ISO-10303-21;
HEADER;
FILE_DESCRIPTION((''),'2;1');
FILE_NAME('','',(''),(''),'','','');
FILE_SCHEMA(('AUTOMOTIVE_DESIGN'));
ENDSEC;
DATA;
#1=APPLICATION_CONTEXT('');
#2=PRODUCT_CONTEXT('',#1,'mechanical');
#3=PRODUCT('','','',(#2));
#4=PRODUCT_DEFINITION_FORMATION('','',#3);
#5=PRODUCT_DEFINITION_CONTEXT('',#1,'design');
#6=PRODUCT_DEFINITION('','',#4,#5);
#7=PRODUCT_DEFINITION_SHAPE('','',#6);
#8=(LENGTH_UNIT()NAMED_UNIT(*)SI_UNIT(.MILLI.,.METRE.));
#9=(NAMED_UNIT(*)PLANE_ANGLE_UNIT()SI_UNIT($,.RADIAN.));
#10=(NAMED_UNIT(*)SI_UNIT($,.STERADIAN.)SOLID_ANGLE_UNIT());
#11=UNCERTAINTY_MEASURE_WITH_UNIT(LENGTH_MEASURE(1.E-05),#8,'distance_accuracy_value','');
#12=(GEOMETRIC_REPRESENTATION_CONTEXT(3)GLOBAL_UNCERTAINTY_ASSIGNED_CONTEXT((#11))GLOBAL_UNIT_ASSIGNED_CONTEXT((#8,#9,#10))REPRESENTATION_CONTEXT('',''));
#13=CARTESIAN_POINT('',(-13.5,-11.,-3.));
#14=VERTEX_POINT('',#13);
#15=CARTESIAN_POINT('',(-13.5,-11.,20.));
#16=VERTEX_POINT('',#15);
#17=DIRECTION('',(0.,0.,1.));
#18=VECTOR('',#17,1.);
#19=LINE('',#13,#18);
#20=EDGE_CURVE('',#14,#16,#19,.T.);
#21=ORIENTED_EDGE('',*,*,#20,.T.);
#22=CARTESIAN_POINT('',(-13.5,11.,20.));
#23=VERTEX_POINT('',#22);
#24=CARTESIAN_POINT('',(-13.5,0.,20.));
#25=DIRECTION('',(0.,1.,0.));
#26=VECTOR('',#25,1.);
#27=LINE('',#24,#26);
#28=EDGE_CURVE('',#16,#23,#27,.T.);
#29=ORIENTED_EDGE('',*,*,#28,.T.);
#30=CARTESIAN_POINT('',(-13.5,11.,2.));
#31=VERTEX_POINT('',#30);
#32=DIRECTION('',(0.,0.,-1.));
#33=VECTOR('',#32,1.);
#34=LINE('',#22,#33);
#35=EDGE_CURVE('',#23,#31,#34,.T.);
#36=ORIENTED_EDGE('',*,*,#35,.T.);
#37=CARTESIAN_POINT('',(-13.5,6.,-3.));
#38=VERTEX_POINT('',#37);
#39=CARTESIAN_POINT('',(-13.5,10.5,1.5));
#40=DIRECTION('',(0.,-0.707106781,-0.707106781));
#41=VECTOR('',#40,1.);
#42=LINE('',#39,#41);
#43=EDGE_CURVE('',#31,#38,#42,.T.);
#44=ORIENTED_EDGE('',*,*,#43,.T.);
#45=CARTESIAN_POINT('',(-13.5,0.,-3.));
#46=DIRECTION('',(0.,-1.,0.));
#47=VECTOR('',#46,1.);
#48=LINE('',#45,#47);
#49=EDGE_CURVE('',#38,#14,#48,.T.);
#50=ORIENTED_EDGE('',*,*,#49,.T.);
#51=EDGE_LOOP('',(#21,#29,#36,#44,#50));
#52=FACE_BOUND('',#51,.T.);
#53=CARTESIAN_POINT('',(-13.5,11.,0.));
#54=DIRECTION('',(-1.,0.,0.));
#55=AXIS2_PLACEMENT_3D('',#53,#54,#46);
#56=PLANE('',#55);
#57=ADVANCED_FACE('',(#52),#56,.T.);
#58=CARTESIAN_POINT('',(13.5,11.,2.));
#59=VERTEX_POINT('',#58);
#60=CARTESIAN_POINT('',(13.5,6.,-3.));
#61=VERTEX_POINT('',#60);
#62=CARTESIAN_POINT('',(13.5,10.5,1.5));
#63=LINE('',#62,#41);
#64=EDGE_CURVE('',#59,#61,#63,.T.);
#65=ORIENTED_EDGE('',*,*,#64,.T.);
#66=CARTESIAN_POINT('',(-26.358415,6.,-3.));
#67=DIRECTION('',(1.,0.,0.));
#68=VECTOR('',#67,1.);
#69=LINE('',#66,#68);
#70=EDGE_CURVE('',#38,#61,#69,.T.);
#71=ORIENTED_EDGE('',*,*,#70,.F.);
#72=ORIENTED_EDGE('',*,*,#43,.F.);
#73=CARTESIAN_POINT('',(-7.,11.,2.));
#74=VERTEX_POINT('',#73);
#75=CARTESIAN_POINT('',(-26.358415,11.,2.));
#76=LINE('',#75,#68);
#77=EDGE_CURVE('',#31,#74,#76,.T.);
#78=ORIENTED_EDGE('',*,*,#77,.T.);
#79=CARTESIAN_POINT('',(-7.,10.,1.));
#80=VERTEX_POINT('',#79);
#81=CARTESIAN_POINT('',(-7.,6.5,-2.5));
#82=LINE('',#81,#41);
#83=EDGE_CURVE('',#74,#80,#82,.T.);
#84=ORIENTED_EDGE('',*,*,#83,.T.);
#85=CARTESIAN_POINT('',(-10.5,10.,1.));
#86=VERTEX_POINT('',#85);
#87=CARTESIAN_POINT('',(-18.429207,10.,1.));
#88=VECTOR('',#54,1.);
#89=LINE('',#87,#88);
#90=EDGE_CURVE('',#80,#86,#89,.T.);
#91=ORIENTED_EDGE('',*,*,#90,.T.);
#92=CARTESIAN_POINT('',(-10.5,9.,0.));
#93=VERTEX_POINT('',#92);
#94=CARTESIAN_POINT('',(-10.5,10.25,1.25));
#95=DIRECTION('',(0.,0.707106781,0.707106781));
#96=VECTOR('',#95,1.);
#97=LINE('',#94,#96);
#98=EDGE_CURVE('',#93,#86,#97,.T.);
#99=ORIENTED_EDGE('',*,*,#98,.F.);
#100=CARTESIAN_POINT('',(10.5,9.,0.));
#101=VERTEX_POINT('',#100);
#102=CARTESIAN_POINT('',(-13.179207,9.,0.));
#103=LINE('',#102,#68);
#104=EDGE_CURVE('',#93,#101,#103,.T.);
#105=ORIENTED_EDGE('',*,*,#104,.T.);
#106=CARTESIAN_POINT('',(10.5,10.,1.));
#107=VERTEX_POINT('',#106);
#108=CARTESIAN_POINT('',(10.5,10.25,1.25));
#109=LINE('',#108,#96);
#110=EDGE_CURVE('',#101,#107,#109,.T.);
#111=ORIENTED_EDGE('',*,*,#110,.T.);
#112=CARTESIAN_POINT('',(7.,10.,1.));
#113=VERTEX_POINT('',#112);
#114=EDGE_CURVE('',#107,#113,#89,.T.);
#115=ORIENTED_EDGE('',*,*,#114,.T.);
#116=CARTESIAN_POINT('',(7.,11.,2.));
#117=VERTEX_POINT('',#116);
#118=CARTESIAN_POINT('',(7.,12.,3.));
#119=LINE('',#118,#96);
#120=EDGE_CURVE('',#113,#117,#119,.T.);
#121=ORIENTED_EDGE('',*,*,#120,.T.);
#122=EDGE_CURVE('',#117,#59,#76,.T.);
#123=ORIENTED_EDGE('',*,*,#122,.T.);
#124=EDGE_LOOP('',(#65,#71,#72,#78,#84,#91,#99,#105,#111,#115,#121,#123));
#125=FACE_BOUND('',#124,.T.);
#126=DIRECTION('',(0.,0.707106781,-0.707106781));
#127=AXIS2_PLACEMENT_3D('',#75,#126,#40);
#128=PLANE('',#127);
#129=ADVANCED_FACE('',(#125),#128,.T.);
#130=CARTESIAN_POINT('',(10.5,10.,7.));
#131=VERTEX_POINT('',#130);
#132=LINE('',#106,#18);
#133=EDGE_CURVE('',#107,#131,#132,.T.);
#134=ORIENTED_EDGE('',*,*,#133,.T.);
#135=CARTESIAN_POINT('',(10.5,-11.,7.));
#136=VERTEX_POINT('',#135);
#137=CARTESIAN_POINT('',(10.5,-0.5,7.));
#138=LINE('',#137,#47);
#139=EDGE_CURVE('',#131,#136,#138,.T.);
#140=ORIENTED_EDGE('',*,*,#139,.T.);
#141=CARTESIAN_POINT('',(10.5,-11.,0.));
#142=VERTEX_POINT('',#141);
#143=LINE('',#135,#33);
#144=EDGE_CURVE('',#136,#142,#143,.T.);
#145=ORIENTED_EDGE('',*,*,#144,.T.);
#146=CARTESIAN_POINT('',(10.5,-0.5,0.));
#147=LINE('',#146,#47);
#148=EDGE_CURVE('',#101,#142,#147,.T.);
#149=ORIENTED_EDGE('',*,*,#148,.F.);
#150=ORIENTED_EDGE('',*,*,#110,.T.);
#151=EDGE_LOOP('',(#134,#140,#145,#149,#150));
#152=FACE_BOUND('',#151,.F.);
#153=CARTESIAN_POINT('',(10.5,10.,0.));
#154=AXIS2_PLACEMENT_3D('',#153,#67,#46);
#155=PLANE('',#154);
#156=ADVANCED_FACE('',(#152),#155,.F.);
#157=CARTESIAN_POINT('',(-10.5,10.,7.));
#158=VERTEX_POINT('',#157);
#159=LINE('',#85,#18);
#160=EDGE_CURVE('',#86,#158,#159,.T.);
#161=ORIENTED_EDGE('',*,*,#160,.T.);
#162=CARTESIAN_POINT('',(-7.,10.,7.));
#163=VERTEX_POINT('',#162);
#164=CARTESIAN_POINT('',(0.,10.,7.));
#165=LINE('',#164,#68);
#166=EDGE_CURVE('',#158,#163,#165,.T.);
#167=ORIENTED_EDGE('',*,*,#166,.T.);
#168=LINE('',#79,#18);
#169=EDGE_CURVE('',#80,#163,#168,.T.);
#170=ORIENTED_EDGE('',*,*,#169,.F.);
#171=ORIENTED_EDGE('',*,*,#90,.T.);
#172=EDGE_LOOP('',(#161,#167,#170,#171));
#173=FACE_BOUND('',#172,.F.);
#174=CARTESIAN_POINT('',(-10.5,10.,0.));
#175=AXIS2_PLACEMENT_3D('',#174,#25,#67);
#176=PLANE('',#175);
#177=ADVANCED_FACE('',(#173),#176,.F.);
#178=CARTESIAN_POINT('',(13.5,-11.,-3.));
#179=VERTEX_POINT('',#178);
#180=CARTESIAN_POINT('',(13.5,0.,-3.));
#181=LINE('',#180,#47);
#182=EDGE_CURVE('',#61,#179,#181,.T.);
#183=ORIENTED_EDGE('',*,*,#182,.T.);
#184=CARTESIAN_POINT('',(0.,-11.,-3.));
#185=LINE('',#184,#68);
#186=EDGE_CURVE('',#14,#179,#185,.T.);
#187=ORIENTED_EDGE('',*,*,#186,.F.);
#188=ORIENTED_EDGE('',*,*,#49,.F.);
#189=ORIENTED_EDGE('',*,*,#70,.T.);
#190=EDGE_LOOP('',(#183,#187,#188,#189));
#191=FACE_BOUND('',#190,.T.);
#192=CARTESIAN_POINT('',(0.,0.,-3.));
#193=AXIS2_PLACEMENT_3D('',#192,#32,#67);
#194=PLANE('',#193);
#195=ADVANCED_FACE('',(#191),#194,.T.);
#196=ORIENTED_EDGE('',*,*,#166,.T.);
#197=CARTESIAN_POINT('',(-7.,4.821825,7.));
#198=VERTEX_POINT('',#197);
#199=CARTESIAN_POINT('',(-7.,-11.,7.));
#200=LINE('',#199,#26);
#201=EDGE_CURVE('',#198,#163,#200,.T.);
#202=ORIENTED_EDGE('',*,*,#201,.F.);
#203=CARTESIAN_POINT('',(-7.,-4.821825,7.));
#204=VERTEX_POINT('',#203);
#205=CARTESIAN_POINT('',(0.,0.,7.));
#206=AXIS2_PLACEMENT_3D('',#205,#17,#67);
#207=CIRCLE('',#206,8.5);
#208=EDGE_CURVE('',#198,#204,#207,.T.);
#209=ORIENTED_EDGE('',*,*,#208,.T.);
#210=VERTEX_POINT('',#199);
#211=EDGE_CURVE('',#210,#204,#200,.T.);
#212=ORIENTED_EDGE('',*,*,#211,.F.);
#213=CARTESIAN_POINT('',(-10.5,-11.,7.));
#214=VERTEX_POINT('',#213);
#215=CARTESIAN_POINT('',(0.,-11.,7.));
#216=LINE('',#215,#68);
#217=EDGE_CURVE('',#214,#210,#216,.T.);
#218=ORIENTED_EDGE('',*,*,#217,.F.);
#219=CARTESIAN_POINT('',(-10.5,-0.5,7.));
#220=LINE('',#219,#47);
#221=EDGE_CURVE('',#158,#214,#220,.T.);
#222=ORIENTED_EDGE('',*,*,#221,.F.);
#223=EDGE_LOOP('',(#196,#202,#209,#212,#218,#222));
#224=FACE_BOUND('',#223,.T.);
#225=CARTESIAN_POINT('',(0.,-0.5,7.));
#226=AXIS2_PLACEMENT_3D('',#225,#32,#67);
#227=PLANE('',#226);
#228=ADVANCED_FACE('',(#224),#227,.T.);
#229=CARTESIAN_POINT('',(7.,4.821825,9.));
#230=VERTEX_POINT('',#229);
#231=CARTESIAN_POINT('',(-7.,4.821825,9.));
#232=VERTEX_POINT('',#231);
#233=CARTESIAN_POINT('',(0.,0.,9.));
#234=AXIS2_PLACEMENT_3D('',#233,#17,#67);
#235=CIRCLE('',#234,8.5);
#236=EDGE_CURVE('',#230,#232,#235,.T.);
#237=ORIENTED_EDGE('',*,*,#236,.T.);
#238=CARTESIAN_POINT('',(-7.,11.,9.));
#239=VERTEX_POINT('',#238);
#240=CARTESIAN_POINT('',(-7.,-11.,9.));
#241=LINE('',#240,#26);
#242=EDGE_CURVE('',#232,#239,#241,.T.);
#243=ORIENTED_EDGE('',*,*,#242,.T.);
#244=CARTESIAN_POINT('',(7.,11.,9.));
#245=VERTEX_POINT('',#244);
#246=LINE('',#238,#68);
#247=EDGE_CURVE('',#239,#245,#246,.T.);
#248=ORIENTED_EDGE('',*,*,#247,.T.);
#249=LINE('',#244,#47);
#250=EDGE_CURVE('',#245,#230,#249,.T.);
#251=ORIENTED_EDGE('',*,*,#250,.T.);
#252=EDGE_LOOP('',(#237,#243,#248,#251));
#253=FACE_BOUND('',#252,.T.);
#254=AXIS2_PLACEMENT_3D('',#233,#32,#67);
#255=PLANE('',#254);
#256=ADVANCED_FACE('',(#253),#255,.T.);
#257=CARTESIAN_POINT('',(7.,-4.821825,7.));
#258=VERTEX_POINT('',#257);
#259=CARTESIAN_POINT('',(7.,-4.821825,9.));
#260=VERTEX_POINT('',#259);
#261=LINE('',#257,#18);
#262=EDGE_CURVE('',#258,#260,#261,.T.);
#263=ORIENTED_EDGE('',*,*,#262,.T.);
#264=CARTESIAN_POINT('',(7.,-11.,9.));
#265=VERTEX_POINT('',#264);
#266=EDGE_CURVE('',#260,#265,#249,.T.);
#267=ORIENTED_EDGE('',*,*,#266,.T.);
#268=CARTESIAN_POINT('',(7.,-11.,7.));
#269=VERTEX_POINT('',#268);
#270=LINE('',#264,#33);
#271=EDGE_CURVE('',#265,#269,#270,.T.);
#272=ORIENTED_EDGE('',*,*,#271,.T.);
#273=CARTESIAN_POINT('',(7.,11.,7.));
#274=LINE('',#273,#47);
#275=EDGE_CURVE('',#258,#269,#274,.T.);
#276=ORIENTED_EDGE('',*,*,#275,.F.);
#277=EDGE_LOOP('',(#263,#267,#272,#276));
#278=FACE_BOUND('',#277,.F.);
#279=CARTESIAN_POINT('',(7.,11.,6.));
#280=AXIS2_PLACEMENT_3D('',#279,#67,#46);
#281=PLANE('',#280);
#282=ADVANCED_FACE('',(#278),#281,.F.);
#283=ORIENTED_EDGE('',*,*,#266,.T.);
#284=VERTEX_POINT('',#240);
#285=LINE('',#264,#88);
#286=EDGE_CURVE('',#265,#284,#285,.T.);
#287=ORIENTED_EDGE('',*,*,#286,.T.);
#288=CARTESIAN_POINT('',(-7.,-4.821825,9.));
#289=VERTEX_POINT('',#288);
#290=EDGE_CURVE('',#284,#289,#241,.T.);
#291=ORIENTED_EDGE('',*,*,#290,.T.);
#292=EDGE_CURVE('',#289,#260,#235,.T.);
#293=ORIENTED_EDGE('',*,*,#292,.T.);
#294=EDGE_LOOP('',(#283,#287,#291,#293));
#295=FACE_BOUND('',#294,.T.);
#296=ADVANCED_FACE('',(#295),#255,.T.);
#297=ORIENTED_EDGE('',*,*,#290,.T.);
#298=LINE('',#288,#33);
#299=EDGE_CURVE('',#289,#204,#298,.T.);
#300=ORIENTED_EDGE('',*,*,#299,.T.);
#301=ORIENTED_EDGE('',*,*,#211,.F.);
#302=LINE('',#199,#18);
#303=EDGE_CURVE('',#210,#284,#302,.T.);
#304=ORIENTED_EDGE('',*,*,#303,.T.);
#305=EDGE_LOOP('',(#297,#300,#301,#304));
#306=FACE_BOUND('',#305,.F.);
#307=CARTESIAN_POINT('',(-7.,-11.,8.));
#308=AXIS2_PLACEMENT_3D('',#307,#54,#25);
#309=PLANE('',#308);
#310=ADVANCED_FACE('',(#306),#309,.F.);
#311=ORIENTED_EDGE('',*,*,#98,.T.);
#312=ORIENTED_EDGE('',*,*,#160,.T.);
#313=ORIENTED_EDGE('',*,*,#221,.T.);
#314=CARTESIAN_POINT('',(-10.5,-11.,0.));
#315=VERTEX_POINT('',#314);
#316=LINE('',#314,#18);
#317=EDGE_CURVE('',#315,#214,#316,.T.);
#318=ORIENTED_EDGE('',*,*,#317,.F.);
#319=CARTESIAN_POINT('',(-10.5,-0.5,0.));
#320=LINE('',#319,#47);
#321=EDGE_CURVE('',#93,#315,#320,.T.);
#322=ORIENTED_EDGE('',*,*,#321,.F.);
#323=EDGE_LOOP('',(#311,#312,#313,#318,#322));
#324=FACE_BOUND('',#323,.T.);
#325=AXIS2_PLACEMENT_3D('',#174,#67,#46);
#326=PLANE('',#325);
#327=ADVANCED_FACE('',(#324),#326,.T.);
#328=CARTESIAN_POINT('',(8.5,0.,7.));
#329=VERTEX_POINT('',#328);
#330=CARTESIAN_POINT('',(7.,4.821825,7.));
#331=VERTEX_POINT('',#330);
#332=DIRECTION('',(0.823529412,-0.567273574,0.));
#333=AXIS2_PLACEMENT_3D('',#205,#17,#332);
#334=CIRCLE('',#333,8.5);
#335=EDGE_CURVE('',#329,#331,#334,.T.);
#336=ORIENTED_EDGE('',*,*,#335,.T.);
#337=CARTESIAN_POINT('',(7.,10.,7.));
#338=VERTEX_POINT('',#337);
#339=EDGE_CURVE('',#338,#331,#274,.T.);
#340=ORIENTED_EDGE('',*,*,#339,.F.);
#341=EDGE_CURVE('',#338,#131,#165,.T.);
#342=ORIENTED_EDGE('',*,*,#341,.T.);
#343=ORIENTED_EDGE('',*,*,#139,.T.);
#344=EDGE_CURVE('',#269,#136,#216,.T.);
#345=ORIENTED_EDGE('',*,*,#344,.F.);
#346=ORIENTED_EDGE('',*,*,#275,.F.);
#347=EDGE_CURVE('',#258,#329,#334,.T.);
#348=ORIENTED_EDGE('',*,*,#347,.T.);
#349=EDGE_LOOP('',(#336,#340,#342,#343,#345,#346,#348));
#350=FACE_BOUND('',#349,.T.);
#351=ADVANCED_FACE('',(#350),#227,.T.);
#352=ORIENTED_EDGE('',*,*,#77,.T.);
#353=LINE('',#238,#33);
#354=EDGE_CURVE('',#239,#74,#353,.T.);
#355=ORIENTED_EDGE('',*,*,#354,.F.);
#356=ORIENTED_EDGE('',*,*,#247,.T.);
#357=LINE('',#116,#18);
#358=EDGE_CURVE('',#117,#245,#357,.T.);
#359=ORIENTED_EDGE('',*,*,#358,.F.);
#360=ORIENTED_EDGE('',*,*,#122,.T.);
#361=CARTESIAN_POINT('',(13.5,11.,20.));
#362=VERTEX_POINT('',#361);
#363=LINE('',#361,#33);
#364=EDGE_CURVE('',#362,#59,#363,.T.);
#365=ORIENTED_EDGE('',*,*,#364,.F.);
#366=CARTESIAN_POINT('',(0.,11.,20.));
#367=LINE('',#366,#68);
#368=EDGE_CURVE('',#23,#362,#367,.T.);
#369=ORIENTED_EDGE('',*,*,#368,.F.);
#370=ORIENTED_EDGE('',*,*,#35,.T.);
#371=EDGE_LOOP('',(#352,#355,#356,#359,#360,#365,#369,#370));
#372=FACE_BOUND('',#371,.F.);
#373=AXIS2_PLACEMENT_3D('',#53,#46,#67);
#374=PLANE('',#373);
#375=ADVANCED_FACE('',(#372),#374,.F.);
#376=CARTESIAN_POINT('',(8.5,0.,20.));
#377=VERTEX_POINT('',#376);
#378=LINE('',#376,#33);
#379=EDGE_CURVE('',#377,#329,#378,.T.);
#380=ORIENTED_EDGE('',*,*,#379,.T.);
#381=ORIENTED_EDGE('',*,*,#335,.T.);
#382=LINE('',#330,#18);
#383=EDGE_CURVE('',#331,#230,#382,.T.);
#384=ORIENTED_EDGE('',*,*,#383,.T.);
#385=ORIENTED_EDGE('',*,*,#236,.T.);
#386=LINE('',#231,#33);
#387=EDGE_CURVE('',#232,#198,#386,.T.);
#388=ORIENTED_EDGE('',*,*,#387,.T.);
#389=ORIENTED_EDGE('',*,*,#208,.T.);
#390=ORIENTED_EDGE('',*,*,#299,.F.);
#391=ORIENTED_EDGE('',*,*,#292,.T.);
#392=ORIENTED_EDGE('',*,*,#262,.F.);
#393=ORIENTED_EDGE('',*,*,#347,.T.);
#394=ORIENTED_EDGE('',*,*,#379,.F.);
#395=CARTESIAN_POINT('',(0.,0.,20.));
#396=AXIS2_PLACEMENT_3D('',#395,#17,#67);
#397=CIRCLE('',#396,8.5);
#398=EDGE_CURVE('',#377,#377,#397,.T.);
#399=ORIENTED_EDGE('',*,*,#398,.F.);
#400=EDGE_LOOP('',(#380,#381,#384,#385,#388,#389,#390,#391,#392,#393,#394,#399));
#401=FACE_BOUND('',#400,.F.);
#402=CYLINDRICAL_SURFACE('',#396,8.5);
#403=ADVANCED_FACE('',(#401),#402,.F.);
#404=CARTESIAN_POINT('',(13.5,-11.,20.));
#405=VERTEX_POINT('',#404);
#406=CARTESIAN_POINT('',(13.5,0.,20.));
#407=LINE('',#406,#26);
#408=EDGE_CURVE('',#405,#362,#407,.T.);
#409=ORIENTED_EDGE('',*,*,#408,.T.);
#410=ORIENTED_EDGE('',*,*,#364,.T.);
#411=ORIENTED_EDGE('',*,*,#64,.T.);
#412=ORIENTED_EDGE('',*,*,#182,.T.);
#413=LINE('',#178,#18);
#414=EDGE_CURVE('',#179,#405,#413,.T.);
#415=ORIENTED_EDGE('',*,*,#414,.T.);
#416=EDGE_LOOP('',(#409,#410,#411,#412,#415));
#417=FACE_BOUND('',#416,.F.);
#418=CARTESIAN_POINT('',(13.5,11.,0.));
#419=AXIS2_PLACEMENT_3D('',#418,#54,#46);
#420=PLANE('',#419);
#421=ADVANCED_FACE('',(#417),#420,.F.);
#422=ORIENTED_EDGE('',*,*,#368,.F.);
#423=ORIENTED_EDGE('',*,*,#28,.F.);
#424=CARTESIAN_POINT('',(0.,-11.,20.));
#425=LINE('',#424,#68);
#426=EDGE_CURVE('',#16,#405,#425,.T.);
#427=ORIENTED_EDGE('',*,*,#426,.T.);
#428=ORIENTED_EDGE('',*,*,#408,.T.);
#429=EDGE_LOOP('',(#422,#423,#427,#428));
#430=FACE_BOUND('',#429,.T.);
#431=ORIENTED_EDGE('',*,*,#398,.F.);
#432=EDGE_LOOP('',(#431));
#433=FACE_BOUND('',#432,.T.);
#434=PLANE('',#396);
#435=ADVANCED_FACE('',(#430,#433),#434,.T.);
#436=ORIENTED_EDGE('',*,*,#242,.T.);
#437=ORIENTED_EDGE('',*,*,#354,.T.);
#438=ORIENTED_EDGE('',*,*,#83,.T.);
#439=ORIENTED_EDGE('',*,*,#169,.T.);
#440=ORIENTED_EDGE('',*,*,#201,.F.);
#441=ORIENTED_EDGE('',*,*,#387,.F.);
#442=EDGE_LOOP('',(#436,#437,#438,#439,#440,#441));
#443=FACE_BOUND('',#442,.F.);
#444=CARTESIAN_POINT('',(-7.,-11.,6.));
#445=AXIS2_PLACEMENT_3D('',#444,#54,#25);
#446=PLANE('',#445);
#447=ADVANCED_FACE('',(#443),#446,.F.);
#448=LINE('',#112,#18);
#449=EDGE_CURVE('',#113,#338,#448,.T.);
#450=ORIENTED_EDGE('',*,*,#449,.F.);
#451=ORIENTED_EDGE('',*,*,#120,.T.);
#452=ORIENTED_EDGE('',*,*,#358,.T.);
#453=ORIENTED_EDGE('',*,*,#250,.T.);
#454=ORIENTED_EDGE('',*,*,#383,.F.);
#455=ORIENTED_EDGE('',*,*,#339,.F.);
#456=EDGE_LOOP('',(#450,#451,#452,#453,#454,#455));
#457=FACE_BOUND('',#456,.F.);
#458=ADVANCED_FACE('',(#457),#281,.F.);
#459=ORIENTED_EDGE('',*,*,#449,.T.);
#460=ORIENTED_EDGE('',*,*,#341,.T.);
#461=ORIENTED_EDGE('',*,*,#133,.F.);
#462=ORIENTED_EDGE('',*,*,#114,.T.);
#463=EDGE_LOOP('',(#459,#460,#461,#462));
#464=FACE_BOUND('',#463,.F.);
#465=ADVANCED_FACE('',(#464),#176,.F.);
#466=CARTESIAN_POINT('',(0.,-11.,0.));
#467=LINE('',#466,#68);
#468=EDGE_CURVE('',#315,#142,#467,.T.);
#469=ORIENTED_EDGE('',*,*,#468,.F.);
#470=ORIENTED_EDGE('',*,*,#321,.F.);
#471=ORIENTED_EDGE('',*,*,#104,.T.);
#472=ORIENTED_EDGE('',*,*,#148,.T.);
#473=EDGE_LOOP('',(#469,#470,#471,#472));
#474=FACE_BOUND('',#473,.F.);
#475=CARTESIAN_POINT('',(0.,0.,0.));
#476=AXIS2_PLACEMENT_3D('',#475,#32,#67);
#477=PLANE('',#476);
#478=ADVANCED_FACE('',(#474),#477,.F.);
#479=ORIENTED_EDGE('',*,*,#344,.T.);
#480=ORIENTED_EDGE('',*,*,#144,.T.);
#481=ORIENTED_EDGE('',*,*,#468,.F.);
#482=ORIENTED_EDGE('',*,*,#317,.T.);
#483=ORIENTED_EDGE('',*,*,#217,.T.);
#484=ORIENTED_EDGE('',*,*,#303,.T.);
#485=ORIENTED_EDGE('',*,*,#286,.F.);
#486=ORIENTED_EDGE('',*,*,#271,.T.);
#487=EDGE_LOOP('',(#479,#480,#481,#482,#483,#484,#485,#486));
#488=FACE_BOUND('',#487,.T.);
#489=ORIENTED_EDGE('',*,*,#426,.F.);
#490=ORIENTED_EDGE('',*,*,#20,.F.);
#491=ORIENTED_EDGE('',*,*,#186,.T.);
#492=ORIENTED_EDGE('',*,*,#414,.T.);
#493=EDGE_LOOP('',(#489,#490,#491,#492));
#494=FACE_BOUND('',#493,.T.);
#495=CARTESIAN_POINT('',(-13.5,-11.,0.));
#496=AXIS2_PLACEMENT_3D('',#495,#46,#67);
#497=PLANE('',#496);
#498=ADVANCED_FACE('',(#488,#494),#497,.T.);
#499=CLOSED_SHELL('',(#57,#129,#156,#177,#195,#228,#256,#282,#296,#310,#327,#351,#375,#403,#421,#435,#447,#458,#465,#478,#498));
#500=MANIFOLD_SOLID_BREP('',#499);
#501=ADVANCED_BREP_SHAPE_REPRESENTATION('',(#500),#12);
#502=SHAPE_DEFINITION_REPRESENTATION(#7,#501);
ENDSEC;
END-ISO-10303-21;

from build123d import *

# Parameters (mm, degrees)
F0_W         = 27
F0_H         = 22
F1_DEPTH     = 20
F2_W         = 21
F2_H         = 21
F3_DEPTH     = 6
F5_DEPTH     = 2
F7_DEPTH     = 20
F8_DEPTH     = 6
F9_W         = 27
F9_H         = 22
F10_DEPTH    = 3
F11_T1_DEPTH = 52.7168298797
F12_R        = 8.5
F13_DEPTH    = 20
F14_DEPTH    = 1


# Not quite as in the source:
# - a fillet or chamfer that OpenCascade refuses, or shapes differently, is made with other operations: its cross-section is extruded or revolved along the edge and cut away or added


with BuildPart() as f1:
    # F0 (on Top) → F1 (new body)
    with BuildSketch(Plane.XY):
        Rectangle(F0_W, F0_H)
    extrude(amount=F1_DEPTH)

    # F2 (on face) → F3 (cut)
    with BuildSketch(Plane(origin=(0, 0, 0), x_dir=(1, 0, 0), z_dir=(0, 0, -1))):
        with Locations((0, 0.5)):
            Rectangle(F2_W, F2_H)
    extrude(amount=-F3_DEPTH, mode=Mode.SUBTRACT)

    # F4 (on face) → F5 (cut)
    with BuildSketch(Plane(origin=(0, 0, 6), x_dir=(1, 0, 0), z_dir=(0, 0, -1))):
        Polygon((0, 11), (-7, 11), (-7, -11), (7, -11), (7, 11), align=None)
    extrude(amount=-F5_DEPTH, mode=Mode.SUBTRACT)

    # F6 (on face) → F7 (cut)
    with BuildSketch(Plane.XY.offset(20)):
        Polygon((0, -3), (3, -3), (3, 3), (-3, 3), (-3, -3), align=None)
    extrude(amount=-F7_DEPTH, mode=Mode.SUBTRACT)

    # F8 (cut): a face of the model
    f8_faces = [f1.faces().sort_by_distance(p)[0] for p in [
        (0, 10.5, 6),
    ]]
    extrude(f8_faces, amount=-F8_DEPTH, mode=Mode.SUBTRACT)

    # F9 (on face) → F10 (join)
    with BuildSketch(Plane(origin=(0, 0, 0), x_dir=(1, 0, 0), z_dir=(0, 0, -1))):
        Rectangle(F9_W, F9_H)
    extrude(amount=F10_DEPTH)

    # F11: chamfer of 5 on 1 edges, made by hand

    # F11_s2 → F11_t1 (cut)
    with BuildSketch(Plane.YZ.offset(-26.3584149398)):
        Polygon((11, 2), (6, -3), (11, -3), align=None)
    extrude(amount=F11_T1_DEPTH, mode=Mode.SUBTRACT)

    # F12 (on face) → F13 (cut)
    with BuildSketch(Plane.XY.offset(20)):
        Circle(F12_R)
    extrude(amount=-F13_DEPTH, mode=Mode.SUBTRACT)

    # F14 (cut): faces of the model
    f14_faces = [f1.faces().sort_by_distance(p)[0] for p in [
        (-8.9267642555, -0.5771749807, 6),
        (8.9267642555, -0.5771749807, 6),
        (0, -9.0505273171, 8),
        (0, 9.0505273171, 8),
    ]]
    extrude(f14_faces, amount=-F14_DEPTH, mode=Mode.SUBTRACT)


solid = f1.part
